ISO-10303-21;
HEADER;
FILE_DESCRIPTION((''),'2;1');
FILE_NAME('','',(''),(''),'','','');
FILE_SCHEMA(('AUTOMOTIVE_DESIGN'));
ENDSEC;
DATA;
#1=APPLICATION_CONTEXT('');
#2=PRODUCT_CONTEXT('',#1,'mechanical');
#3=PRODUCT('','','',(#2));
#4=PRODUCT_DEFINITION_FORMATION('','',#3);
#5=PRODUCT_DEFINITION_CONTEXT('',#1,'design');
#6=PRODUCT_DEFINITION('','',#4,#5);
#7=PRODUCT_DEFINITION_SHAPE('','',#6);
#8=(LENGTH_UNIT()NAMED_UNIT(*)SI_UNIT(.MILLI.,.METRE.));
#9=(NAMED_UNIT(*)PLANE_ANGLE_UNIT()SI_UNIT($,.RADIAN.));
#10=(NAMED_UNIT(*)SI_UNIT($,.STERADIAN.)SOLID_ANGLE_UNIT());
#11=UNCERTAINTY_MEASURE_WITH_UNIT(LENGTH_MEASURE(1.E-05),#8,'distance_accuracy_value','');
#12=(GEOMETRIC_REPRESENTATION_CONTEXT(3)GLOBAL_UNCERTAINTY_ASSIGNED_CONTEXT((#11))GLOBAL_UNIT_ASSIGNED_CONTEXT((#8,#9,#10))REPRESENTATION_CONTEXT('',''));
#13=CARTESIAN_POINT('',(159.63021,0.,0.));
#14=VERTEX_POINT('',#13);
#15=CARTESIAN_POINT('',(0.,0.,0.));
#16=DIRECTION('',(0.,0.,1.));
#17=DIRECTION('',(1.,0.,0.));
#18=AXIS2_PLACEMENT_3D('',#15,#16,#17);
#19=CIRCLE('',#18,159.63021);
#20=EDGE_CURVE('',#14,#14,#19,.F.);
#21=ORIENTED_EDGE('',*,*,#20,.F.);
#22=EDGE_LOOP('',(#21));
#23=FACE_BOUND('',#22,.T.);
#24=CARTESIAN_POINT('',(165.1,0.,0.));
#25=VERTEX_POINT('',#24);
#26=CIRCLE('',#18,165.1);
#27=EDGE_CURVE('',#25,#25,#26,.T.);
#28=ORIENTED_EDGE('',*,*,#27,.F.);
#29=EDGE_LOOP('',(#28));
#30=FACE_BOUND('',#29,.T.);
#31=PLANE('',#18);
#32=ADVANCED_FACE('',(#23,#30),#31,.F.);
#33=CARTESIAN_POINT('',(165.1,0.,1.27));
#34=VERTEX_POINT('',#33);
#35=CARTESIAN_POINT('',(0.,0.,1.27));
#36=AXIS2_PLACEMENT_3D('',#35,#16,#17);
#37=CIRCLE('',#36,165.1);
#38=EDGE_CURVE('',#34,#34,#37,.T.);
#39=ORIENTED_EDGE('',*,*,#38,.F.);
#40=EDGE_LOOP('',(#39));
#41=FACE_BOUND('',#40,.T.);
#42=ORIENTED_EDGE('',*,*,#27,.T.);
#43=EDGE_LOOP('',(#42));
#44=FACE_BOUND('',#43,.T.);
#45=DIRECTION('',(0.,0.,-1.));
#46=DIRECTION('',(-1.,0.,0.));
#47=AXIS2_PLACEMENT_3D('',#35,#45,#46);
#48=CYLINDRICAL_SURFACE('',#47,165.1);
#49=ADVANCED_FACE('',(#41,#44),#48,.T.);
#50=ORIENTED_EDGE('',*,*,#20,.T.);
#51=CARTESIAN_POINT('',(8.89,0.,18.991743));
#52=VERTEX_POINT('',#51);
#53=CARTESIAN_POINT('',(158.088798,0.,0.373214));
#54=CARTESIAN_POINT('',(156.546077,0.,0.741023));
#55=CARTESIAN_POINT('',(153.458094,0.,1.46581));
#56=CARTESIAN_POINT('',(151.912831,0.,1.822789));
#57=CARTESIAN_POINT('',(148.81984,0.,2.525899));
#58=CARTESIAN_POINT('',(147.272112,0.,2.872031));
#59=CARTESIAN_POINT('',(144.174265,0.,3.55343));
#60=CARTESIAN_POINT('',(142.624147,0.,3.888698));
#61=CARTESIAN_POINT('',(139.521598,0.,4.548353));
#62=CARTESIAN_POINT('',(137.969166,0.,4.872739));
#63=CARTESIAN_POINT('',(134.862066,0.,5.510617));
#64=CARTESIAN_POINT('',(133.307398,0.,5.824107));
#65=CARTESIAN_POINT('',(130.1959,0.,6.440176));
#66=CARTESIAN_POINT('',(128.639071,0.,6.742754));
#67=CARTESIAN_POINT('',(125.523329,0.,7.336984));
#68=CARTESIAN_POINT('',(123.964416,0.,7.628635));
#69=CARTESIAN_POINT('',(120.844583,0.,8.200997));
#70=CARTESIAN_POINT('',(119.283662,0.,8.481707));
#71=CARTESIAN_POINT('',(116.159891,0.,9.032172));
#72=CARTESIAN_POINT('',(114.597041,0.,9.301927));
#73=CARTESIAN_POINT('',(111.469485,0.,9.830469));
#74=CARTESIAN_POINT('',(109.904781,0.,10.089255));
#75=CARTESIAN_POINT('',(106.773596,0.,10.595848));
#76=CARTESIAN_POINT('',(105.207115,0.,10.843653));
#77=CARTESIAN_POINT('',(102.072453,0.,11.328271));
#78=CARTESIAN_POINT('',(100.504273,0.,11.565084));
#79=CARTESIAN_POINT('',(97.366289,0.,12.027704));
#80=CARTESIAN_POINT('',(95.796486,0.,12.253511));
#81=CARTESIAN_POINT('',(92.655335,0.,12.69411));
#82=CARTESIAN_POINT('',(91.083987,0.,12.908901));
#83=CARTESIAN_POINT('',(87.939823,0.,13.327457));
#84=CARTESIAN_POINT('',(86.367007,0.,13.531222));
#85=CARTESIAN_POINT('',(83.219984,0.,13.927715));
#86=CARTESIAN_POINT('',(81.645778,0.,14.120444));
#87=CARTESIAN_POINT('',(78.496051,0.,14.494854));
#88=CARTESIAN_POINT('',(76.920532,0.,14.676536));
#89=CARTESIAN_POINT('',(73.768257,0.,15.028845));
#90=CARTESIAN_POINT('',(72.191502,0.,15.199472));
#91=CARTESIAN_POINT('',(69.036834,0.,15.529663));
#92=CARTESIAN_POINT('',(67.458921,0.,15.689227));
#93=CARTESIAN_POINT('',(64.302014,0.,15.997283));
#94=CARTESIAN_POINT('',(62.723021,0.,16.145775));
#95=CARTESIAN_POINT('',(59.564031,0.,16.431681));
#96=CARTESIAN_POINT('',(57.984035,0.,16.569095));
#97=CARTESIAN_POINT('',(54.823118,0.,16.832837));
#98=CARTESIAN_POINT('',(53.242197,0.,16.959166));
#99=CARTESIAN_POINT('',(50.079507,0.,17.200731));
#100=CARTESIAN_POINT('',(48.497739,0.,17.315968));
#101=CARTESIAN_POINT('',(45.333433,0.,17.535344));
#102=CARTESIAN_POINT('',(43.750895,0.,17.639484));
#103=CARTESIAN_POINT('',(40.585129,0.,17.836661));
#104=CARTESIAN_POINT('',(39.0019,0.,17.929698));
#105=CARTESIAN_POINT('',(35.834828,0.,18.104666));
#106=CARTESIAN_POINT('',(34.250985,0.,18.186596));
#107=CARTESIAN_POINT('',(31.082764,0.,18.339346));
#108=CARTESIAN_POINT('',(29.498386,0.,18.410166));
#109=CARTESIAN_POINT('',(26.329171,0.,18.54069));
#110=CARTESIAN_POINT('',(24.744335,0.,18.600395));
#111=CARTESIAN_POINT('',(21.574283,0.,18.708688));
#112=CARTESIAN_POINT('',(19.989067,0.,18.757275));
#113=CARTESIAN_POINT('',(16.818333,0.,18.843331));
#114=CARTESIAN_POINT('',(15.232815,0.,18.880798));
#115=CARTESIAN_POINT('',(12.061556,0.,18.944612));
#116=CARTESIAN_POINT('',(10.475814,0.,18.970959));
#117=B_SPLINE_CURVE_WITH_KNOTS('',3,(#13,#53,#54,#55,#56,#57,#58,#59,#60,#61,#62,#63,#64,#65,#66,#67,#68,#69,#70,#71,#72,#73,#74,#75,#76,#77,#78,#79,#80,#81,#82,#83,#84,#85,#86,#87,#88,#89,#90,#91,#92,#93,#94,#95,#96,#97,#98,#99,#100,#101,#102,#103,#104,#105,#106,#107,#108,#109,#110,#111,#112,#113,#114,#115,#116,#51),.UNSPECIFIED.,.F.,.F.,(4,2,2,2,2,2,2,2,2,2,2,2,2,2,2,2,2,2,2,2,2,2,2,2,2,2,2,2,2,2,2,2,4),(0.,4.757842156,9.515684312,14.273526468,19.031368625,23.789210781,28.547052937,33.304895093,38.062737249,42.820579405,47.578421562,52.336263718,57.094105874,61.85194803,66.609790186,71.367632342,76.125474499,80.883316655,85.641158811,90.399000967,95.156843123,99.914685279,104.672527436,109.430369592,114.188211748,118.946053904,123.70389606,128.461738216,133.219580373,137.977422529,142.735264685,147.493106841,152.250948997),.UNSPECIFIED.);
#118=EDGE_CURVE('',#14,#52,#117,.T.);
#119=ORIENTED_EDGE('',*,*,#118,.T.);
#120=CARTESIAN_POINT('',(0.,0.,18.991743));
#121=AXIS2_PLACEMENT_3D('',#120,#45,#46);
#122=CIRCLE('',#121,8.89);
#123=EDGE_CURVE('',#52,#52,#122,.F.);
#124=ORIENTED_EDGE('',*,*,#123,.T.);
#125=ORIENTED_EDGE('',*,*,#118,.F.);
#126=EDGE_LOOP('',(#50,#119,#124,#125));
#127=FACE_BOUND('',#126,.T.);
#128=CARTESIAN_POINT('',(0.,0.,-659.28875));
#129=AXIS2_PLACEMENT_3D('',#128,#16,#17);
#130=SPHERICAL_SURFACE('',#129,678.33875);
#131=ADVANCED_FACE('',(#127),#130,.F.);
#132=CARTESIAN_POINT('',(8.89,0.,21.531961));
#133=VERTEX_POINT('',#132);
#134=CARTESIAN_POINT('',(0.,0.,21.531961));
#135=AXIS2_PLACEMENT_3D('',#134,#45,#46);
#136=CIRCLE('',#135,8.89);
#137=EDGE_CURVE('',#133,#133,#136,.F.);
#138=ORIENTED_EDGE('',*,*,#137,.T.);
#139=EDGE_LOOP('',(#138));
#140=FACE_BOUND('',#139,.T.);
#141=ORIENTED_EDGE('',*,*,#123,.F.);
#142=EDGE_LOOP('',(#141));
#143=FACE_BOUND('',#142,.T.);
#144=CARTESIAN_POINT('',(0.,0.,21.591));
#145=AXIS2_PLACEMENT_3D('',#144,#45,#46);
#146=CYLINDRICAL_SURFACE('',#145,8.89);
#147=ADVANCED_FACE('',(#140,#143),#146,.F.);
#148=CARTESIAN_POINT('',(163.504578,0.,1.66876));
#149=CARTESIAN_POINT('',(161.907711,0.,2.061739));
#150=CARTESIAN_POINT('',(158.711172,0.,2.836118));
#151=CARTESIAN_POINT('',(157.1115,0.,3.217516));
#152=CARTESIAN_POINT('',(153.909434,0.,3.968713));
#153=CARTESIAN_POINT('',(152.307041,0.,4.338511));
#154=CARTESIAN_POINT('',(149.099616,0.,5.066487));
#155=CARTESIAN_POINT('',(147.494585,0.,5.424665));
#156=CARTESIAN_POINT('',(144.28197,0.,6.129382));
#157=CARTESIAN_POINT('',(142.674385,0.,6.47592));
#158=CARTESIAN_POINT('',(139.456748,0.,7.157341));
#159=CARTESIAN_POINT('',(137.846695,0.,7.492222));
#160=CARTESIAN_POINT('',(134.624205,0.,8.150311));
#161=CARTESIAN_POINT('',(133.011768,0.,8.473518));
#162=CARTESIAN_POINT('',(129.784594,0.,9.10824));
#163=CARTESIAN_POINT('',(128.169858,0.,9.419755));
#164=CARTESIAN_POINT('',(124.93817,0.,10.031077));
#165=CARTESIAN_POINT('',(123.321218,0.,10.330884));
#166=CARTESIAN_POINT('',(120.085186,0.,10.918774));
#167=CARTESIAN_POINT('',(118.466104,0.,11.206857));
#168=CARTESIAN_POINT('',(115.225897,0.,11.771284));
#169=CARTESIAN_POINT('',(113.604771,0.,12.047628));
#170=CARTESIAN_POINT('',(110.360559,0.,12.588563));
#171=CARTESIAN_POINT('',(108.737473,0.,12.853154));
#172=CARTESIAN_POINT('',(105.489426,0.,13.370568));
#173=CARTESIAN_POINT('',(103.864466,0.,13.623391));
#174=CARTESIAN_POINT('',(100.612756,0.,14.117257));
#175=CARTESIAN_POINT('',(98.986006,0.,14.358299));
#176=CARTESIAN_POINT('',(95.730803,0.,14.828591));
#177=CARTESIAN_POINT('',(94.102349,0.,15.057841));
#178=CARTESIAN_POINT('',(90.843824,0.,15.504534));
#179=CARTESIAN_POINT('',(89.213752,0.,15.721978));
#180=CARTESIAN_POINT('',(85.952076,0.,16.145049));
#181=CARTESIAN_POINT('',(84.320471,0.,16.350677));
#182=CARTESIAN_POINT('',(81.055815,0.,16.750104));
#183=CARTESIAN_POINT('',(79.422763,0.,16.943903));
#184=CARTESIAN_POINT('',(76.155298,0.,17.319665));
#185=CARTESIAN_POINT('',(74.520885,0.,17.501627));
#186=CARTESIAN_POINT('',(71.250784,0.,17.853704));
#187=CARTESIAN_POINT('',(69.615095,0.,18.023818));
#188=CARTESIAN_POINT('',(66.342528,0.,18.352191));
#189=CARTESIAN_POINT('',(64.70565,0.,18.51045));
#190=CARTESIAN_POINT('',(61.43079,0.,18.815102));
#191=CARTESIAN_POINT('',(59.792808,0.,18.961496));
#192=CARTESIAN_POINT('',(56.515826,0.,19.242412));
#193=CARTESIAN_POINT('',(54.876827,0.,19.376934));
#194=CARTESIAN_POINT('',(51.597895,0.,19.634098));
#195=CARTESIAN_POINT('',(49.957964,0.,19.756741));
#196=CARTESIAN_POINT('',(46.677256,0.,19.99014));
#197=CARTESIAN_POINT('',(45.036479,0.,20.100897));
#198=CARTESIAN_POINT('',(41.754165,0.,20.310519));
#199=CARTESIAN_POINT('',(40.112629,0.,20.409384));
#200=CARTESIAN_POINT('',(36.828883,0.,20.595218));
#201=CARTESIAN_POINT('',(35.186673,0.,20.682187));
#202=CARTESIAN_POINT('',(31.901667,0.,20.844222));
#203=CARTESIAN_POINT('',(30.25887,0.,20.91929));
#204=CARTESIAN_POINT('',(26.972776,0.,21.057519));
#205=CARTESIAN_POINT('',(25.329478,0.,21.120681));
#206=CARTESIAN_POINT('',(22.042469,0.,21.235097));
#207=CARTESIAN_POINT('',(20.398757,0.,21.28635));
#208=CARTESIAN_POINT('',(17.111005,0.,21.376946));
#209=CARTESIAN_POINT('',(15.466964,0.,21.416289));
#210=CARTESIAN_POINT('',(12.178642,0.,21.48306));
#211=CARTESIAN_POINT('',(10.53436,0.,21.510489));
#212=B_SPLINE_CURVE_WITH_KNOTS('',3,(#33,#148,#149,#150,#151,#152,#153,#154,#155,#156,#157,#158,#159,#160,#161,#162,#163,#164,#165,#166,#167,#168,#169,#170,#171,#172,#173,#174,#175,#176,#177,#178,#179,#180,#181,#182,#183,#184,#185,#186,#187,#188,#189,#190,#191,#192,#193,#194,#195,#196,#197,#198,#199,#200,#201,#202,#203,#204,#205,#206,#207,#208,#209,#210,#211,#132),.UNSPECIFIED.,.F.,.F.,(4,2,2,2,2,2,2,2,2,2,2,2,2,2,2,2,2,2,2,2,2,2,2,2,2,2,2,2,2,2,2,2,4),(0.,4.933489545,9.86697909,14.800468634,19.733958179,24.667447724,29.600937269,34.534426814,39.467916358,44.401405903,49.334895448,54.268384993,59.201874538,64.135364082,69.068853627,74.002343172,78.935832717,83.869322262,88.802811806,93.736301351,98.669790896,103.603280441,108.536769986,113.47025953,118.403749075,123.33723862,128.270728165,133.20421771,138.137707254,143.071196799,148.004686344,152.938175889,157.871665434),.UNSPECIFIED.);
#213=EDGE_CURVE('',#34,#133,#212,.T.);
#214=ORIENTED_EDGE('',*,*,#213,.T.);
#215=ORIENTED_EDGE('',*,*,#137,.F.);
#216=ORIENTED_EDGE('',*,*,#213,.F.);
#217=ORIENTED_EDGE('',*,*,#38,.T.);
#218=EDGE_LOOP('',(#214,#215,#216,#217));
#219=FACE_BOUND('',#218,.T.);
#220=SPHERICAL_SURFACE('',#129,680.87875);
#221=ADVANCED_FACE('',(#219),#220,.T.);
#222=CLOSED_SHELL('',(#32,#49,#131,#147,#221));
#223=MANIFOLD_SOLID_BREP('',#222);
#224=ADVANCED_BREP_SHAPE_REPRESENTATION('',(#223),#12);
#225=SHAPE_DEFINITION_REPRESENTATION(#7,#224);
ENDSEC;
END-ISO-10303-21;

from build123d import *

# Parameters (mm, degrees)
SKETCH17_R              = 165.1
BOSS_EXTRUDE1_DEPTH     = 1.27
DOME2_FACE_RADIUS       = 165.1
DOME2_HEIGHT            = 20.32
CUT_EXTRUDE1_REACH      = 236.483
CUT_EXTRUDE1_END_RADIUS = 680.87875
SKETCH18_R              = 8.89


# Read off the part's stored shape, not the designer's step: Shell2
with BuildPart() as part:
    # Sketch17 → Boss-Extrude1 (new body)
    with BuildSketch(Plane.XY):
        Circle(SKETCH17_R)
    extrude(amount=BOSS_EXTRUDE1_DEPTH)

    # Dome2: a dome of height H over a round flat face of radius A is a cap of a sphere of radius (A * A + H * H) / (2 * H)
    dome2_r = (DOME2_FACE_RADIUS * DOME2_FACE_RADIUS + DOME2_HEIGHT * DOME2_HEIGHT) / (2 * DOME2_HEIGHT)
    dome2_base = Plane((0, 0, 1.27), z_dir=(0, 0, 1))
    with Locations(dome2_base.offset(DOME2_HEIGHT - dome2_r)):
        dome2_ball = Sphere(dome2_r, mode=Mode.PRIVATE)
    add(split(dome2_ball, bisect_by=dome2_base, keep=Keep.TOP, mode=Mode.PRIVATE))

    # Shell2 outline → Shell2 (revolve, cut)
    with BuildSketch(Plane.XZ):
        with BuildLine():
            Line((0, 0), (159.630210195, -1e-07))
            ThreePointArc((159.630210195, -1e-07), (80.381444548, 14.27066321), (0, 19.05))
            Line((0, 19.05), (0, 0))
        make_face()
    revolve(axis=Axis((0, 0, 0), (0, 0, 1)), mode=Mode.SUBTRACT)

    # Cut-Extrude1: up to this sphere (the profile starts inside it)
    cut_extrude1_end = Location((0, 0, -659.28875)) * Sphere(CUT_EXTRUDE1_END_RADIUS, mode=Mode.PRIVATE)
    # Sketch18 → Cut-Extrude1 (cut, up to the surface)
    with BuildSketch(Plane.XY, mode=Mode.PRIVATE) as cut_extrude1_sk1:
        Circle(SKETCH18_R)
    cut_extrude1_tool1 = extrude(cut_extrude1_sk1.sketch, amount=CUT_EXTRUDE1_REACH, mode=Mode.PRIVATE) & cut_extrude1_end
    add(cut_extrude1_tool1.solids().sort_by_distance((0, 0, 0))[0], mode=Mode.SUBTRACT)


solid = part.part
